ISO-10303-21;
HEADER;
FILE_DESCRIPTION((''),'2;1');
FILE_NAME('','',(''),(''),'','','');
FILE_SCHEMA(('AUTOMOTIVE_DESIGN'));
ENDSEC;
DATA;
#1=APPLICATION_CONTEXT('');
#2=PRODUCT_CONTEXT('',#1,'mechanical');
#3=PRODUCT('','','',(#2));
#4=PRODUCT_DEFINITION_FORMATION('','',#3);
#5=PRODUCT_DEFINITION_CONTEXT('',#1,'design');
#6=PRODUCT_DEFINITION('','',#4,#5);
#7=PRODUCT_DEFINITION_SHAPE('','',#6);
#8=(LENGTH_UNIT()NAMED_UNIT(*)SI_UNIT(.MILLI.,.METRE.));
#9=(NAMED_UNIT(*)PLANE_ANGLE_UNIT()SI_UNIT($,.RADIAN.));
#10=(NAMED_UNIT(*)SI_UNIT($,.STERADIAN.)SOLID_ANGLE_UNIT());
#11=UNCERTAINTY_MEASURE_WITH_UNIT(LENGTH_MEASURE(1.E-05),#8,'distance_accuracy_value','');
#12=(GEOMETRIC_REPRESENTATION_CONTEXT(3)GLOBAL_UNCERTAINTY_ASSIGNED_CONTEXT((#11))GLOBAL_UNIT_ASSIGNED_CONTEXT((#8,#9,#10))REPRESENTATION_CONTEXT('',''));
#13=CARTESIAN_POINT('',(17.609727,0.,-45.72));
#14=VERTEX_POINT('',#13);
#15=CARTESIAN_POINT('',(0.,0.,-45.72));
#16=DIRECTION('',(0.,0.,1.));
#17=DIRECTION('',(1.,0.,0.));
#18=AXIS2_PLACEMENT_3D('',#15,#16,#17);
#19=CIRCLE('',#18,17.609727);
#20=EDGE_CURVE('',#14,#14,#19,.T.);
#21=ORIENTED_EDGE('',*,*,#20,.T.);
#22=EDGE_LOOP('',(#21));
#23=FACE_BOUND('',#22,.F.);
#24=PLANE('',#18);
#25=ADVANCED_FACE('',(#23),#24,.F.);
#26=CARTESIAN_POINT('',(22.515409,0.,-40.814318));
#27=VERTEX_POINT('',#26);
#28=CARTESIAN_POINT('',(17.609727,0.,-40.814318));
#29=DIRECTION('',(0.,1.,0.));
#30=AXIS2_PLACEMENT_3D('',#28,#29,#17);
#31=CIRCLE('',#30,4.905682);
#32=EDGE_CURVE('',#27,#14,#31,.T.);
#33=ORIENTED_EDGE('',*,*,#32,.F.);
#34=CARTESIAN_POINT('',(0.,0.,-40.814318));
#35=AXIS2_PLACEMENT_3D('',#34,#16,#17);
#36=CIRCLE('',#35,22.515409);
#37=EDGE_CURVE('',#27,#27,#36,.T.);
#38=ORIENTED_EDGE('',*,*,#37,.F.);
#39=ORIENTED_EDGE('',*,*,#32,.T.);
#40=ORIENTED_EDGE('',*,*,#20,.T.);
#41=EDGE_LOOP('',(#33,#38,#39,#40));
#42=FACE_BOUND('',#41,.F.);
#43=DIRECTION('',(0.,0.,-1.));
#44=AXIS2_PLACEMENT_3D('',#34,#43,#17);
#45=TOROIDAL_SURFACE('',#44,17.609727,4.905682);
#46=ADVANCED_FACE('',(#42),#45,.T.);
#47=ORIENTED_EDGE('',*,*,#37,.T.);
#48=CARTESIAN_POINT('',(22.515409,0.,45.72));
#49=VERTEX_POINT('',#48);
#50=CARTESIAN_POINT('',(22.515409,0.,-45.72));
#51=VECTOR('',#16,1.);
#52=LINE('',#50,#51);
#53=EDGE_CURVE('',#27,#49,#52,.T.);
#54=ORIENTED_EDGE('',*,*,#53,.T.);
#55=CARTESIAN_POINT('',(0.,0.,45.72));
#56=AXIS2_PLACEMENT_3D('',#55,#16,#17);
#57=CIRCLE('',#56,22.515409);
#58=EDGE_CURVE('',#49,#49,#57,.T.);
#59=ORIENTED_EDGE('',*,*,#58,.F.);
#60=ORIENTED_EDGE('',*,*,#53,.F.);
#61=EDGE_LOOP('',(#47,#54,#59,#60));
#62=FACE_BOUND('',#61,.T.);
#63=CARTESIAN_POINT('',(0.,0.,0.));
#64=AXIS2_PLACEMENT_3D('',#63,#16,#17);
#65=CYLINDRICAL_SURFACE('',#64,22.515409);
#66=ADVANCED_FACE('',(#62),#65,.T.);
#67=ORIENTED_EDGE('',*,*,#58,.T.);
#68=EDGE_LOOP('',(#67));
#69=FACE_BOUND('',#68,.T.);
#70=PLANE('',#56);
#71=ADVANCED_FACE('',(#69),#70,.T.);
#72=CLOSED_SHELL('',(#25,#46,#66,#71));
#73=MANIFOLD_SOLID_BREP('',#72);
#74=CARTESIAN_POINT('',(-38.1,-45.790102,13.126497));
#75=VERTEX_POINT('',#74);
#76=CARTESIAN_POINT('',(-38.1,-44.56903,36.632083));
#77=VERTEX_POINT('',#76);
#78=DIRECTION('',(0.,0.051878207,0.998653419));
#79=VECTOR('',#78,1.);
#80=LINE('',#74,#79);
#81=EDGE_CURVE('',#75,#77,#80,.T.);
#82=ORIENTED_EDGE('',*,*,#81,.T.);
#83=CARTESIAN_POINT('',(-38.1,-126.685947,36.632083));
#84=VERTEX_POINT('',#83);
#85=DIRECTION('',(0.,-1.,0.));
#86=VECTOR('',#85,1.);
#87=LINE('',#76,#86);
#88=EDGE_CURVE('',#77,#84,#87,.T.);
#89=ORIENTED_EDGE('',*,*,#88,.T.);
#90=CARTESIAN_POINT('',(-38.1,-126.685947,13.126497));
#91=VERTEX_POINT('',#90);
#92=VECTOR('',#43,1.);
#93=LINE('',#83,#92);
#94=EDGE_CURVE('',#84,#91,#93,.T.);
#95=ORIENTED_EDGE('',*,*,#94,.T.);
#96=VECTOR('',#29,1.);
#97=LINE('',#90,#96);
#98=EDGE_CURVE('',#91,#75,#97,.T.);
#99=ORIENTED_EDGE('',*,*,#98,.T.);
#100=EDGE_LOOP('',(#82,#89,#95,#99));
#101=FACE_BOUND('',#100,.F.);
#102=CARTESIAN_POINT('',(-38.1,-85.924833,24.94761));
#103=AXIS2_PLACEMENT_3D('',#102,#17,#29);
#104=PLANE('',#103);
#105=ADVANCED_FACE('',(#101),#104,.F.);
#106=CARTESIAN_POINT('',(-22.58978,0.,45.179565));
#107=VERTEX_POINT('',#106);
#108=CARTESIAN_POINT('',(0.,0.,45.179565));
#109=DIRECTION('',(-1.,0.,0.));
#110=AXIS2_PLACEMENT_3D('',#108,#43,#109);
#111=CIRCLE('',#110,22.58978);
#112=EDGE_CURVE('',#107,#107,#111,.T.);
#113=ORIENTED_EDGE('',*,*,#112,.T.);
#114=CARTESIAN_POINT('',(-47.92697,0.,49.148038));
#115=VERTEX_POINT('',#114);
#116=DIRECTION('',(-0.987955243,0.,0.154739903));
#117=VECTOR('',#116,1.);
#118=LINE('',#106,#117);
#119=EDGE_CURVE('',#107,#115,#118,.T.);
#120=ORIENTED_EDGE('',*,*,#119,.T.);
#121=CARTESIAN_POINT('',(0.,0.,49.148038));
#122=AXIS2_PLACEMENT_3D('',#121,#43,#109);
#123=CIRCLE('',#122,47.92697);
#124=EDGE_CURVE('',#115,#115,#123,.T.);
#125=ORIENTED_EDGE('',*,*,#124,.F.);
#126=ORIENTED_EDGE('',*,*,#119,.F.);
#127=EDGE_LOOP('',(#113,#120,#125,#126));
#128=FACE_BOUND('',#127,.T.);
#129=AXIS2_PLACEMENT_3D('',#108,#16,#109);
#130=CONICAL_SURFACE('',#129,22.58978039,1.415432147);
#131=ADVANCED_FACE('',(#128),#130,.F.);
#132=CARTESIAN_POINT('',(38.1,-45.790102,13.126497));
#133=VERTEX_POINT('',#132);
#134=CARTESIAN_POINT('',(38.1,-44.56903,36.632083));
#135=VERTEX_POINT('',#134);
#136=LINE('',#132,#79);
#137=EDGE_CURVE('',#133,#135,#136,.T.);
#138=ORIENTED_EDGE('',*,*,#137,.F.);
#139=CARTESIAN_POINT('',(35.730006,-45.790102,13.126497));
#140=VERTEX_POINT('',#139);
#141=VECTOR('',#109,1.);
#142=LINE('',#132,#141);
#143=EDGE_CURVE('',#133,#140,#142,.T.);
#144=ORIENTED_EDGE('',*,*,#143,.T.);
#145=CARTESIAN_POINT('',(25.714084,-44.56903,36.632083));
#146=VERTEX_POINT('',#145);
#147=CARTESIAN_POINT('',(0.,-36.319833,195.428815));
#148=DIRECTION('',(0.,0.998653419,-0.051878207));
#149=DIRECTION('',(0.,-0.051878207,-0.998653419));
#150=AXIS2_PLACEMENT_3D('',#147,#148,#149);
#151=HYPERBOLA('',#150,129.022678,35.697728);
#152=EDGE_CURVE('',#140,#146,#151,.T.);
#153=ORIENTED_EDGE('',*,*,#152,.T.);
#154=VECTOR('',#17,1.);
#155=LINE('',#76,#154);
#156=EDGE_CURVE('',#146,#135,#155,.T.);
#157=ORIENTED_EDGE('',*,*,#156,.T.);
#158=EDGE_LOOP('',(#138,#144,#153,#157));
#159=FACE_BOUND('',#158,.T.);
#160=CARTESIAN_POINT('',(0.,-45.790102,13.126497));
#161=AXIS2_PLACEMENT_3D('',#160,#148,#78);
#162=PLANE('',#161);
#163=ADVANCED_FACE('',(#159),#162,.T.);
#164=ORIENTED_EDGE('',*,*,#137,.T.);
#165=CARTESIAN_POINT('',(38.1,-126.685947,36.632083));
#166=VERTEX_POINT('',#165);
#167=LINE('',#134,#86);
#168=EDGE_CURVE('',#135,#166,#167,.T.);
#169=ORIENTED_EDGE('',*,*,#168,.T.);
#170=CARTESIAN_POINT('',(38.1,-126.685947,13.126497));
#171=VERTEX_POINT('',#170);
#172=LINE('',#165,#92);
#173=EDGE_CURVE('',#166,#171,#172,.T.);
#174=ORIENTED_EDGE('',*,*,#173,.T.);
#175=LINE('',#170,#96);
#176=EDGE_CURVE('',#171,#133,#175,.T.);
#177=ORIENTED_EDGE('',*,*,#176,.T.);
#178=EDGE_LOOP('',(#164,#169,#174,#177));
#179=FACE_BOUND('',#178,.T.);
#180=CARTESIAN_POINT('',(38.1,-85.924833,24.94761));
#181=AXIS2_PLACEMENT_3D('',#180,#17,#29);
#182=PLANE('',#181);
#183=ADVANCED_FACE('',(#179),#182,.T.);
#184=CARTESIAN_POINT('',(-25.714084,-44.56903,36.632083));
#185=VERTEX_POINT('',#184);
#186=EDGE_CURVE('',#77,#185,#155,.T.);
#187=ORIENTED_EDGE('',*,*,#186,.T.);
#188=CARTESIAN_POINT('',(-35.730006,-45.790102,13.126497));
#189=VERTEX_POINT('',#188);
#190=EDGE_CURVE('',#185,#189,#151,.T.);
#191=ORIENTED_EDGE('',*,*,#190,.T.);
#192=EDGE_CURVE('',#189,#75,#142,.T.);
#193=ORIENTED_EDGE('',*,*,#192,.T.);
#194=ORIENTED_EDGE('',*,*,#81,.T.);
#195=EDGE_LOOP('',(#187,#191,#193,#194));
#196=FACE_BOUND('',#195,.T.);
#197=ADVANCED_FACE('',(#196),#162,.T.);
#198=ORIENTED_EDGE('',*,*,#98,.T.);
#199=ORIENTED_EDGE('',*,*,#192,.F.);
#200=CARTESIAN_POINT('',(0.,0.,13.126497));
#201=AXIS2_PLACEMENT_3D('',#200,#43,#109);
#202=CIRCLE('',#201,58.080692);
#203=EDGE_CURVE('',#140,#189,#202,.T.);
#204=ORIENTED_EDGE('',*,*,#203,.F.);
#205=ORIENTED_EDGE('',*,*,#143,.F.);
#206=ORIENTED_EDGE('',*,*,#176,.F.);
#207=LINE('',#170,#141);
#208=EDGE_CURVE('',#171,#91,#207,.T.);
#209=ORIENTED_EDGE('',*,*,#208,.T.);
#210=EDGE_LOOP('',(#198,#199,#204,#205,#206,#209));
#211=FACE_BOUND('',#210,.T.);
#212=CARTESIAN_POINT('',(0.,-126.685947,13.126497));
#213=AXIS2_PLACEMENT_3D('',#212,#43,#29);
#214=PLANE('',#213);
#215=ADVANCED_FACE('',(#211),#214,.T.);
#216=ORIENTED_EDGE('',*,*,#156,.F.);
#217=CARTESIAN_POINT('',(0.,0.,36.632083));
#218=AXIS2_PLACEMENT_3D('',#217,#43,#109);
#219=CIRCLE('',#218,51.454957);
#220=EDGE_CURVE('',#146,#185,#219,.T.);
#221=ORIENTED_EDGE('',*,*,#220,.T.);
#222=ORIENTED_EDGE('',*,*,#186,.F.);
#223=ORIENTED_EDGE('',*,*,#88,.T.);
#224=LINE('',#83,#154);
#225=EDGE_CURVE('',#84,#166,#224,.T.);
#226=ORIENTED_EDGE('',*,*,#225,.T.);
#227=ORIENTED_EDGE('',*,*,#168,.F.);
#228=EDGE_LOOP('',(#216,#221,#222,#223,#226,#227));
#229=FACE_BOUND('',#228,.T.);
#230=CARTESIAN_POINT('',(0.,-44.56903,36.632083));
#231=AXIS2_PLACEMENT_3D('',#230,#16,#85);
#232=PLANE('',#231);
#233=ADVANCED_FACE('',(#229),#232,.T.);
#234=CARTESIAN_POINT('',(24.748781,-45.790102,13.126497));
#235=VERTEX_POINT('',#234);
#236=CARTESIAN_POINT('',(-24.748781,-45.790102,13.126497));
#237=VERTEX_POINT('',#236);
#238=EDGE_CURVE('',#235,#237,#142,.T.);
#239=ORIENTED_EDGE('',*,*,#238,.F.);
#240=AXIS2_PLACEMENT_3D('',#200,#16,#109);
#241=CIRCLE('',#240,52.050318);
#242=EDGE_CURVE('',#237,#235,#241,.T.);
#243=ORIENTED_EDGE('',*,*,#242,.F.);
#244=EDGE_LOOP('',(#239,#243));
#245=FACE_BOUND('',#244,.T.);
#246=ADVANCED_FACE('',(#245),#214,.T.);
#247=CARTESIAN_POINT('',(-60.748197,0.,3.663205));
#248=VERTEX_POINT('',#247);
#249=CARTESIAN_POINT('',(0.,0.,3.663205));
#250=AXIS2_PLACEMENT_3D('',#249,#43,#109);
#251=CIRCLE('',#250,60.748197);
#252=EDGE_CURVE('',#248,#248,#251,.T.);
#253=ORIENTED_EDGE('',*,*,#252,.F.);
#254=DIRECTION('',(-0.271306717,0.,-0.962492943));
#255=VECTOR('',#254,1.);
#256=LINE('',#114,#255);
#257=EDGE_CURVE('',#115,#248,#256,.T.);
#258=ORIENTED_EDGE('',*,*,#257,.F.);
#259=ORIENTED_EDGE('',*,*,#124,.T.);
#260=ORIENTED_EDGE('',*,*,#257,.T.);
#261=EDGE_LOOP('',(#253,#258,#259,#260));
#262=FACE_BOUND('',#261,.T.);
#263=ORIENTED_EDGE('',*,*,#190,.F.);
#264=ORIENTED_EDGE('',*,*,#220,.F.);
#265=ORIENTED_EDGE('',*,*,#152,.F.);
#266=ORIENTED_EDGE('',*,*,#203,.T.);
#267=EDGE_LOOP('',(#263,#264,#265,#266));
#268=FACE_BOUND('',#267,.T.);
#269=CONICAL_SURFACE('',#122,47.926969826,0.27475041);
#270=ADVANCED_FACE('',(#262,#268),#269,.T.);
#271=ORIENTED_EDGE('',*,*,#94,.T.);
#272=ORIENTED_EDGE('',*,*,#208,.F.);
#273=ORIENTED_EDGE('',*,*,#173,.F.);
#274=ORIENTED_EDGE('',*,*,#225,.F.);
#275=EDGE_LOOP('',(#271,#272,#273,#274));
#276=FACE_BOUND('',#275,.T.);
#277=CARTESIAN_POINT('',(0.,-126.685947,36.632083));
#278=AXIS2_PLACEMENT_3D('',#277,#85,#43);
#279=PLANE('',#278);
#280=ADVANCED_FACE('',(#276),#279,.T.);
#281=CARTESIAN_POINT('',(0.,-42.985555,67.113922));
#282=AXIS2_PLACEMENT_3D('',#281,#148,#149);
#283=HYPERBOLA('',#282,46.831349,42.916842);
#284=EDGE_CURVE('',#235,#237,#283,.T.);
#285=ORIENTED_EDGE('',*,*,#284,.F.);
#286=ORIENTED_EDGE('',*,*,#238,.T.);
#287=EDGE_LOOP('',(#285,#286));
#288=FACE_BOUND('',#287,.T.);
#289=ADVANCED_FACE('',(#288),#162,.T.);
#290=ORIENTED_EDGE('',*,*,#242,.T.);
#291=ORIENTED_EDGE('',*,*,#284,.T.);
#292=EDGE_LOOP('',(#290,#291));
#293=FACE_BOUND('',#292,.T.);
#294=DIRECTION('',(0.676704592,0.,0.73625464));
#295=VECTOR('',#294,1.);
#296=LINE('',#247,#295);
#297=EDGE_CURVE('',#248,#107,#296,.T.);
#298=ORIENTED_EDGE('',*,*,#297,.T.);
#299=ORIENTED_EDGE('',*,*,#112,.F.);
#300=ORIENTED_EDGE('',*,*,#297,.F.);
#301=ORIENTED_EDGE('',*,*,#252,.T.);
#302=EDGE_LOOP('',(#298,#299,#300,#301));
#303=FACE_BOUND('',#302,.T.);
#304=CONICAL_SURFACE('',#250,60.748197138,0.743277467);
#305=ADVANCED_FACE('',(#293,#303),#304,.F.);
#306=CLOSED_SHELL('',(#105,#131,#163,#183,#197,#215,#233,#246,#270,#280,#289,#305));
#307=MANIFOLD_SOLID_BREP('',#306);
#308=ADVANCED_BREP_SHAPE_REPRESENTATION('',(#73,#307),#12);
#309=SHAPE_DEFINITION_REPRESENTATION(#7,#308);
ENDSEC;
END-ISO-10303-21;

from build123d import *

# Parameters (mm, degrees)
F3_R     = 22.515409418
F4_DEPTH = 45.72
F5_R     = 4.9056819587
F7_DEPTH = 38.1


# Not quite as in the source:
# - a variable given as a bare number and used for a length is read in inches; the dataset says mm whatever the document's units were


with BuildPart() as f2:
    # F1 (on Front) → F2 (revolve)
    with BuildSketch(Plane.XZ):
        Polygon((-22.5897803903, 45.1795645058), (-47.9269698262, 49.1480380297), (-60.7481971383, 3.6632046103), align=None)
    revolve(axis=Axis((0, 0, 28.5424944013), (0, 0, -1)))

    # F6 (on Right) → F7 (join, symmetric)
    with BuildSketch(Plane.YZ):
        Polygon((-45.7901023328, 13.1264971569), (-44.5690304041, 36.6320833564), (-126.6859471798, 36.6320833564), (-126.6859471798, 13.1264971569), align=None)
    extrude(amount=F7_DEPTH, both=True)


with BuildPart() as f4:
    # F3 (on Top) → F4 (new body, symmetric)
    with BuildSketch(Plane.XY):
        Circle(F3_R)
    extrude(amount=F4_DEPTH, both=True)

    # F5
    f5_edges = [f4.edges().sort_by_distance(p)[0] for p in [
        (-22.515409, 0, -45.72),
    ]]
    fillet(f5_edges, radius=F5_R)


solid = Compound([f2.part, f4.part])
